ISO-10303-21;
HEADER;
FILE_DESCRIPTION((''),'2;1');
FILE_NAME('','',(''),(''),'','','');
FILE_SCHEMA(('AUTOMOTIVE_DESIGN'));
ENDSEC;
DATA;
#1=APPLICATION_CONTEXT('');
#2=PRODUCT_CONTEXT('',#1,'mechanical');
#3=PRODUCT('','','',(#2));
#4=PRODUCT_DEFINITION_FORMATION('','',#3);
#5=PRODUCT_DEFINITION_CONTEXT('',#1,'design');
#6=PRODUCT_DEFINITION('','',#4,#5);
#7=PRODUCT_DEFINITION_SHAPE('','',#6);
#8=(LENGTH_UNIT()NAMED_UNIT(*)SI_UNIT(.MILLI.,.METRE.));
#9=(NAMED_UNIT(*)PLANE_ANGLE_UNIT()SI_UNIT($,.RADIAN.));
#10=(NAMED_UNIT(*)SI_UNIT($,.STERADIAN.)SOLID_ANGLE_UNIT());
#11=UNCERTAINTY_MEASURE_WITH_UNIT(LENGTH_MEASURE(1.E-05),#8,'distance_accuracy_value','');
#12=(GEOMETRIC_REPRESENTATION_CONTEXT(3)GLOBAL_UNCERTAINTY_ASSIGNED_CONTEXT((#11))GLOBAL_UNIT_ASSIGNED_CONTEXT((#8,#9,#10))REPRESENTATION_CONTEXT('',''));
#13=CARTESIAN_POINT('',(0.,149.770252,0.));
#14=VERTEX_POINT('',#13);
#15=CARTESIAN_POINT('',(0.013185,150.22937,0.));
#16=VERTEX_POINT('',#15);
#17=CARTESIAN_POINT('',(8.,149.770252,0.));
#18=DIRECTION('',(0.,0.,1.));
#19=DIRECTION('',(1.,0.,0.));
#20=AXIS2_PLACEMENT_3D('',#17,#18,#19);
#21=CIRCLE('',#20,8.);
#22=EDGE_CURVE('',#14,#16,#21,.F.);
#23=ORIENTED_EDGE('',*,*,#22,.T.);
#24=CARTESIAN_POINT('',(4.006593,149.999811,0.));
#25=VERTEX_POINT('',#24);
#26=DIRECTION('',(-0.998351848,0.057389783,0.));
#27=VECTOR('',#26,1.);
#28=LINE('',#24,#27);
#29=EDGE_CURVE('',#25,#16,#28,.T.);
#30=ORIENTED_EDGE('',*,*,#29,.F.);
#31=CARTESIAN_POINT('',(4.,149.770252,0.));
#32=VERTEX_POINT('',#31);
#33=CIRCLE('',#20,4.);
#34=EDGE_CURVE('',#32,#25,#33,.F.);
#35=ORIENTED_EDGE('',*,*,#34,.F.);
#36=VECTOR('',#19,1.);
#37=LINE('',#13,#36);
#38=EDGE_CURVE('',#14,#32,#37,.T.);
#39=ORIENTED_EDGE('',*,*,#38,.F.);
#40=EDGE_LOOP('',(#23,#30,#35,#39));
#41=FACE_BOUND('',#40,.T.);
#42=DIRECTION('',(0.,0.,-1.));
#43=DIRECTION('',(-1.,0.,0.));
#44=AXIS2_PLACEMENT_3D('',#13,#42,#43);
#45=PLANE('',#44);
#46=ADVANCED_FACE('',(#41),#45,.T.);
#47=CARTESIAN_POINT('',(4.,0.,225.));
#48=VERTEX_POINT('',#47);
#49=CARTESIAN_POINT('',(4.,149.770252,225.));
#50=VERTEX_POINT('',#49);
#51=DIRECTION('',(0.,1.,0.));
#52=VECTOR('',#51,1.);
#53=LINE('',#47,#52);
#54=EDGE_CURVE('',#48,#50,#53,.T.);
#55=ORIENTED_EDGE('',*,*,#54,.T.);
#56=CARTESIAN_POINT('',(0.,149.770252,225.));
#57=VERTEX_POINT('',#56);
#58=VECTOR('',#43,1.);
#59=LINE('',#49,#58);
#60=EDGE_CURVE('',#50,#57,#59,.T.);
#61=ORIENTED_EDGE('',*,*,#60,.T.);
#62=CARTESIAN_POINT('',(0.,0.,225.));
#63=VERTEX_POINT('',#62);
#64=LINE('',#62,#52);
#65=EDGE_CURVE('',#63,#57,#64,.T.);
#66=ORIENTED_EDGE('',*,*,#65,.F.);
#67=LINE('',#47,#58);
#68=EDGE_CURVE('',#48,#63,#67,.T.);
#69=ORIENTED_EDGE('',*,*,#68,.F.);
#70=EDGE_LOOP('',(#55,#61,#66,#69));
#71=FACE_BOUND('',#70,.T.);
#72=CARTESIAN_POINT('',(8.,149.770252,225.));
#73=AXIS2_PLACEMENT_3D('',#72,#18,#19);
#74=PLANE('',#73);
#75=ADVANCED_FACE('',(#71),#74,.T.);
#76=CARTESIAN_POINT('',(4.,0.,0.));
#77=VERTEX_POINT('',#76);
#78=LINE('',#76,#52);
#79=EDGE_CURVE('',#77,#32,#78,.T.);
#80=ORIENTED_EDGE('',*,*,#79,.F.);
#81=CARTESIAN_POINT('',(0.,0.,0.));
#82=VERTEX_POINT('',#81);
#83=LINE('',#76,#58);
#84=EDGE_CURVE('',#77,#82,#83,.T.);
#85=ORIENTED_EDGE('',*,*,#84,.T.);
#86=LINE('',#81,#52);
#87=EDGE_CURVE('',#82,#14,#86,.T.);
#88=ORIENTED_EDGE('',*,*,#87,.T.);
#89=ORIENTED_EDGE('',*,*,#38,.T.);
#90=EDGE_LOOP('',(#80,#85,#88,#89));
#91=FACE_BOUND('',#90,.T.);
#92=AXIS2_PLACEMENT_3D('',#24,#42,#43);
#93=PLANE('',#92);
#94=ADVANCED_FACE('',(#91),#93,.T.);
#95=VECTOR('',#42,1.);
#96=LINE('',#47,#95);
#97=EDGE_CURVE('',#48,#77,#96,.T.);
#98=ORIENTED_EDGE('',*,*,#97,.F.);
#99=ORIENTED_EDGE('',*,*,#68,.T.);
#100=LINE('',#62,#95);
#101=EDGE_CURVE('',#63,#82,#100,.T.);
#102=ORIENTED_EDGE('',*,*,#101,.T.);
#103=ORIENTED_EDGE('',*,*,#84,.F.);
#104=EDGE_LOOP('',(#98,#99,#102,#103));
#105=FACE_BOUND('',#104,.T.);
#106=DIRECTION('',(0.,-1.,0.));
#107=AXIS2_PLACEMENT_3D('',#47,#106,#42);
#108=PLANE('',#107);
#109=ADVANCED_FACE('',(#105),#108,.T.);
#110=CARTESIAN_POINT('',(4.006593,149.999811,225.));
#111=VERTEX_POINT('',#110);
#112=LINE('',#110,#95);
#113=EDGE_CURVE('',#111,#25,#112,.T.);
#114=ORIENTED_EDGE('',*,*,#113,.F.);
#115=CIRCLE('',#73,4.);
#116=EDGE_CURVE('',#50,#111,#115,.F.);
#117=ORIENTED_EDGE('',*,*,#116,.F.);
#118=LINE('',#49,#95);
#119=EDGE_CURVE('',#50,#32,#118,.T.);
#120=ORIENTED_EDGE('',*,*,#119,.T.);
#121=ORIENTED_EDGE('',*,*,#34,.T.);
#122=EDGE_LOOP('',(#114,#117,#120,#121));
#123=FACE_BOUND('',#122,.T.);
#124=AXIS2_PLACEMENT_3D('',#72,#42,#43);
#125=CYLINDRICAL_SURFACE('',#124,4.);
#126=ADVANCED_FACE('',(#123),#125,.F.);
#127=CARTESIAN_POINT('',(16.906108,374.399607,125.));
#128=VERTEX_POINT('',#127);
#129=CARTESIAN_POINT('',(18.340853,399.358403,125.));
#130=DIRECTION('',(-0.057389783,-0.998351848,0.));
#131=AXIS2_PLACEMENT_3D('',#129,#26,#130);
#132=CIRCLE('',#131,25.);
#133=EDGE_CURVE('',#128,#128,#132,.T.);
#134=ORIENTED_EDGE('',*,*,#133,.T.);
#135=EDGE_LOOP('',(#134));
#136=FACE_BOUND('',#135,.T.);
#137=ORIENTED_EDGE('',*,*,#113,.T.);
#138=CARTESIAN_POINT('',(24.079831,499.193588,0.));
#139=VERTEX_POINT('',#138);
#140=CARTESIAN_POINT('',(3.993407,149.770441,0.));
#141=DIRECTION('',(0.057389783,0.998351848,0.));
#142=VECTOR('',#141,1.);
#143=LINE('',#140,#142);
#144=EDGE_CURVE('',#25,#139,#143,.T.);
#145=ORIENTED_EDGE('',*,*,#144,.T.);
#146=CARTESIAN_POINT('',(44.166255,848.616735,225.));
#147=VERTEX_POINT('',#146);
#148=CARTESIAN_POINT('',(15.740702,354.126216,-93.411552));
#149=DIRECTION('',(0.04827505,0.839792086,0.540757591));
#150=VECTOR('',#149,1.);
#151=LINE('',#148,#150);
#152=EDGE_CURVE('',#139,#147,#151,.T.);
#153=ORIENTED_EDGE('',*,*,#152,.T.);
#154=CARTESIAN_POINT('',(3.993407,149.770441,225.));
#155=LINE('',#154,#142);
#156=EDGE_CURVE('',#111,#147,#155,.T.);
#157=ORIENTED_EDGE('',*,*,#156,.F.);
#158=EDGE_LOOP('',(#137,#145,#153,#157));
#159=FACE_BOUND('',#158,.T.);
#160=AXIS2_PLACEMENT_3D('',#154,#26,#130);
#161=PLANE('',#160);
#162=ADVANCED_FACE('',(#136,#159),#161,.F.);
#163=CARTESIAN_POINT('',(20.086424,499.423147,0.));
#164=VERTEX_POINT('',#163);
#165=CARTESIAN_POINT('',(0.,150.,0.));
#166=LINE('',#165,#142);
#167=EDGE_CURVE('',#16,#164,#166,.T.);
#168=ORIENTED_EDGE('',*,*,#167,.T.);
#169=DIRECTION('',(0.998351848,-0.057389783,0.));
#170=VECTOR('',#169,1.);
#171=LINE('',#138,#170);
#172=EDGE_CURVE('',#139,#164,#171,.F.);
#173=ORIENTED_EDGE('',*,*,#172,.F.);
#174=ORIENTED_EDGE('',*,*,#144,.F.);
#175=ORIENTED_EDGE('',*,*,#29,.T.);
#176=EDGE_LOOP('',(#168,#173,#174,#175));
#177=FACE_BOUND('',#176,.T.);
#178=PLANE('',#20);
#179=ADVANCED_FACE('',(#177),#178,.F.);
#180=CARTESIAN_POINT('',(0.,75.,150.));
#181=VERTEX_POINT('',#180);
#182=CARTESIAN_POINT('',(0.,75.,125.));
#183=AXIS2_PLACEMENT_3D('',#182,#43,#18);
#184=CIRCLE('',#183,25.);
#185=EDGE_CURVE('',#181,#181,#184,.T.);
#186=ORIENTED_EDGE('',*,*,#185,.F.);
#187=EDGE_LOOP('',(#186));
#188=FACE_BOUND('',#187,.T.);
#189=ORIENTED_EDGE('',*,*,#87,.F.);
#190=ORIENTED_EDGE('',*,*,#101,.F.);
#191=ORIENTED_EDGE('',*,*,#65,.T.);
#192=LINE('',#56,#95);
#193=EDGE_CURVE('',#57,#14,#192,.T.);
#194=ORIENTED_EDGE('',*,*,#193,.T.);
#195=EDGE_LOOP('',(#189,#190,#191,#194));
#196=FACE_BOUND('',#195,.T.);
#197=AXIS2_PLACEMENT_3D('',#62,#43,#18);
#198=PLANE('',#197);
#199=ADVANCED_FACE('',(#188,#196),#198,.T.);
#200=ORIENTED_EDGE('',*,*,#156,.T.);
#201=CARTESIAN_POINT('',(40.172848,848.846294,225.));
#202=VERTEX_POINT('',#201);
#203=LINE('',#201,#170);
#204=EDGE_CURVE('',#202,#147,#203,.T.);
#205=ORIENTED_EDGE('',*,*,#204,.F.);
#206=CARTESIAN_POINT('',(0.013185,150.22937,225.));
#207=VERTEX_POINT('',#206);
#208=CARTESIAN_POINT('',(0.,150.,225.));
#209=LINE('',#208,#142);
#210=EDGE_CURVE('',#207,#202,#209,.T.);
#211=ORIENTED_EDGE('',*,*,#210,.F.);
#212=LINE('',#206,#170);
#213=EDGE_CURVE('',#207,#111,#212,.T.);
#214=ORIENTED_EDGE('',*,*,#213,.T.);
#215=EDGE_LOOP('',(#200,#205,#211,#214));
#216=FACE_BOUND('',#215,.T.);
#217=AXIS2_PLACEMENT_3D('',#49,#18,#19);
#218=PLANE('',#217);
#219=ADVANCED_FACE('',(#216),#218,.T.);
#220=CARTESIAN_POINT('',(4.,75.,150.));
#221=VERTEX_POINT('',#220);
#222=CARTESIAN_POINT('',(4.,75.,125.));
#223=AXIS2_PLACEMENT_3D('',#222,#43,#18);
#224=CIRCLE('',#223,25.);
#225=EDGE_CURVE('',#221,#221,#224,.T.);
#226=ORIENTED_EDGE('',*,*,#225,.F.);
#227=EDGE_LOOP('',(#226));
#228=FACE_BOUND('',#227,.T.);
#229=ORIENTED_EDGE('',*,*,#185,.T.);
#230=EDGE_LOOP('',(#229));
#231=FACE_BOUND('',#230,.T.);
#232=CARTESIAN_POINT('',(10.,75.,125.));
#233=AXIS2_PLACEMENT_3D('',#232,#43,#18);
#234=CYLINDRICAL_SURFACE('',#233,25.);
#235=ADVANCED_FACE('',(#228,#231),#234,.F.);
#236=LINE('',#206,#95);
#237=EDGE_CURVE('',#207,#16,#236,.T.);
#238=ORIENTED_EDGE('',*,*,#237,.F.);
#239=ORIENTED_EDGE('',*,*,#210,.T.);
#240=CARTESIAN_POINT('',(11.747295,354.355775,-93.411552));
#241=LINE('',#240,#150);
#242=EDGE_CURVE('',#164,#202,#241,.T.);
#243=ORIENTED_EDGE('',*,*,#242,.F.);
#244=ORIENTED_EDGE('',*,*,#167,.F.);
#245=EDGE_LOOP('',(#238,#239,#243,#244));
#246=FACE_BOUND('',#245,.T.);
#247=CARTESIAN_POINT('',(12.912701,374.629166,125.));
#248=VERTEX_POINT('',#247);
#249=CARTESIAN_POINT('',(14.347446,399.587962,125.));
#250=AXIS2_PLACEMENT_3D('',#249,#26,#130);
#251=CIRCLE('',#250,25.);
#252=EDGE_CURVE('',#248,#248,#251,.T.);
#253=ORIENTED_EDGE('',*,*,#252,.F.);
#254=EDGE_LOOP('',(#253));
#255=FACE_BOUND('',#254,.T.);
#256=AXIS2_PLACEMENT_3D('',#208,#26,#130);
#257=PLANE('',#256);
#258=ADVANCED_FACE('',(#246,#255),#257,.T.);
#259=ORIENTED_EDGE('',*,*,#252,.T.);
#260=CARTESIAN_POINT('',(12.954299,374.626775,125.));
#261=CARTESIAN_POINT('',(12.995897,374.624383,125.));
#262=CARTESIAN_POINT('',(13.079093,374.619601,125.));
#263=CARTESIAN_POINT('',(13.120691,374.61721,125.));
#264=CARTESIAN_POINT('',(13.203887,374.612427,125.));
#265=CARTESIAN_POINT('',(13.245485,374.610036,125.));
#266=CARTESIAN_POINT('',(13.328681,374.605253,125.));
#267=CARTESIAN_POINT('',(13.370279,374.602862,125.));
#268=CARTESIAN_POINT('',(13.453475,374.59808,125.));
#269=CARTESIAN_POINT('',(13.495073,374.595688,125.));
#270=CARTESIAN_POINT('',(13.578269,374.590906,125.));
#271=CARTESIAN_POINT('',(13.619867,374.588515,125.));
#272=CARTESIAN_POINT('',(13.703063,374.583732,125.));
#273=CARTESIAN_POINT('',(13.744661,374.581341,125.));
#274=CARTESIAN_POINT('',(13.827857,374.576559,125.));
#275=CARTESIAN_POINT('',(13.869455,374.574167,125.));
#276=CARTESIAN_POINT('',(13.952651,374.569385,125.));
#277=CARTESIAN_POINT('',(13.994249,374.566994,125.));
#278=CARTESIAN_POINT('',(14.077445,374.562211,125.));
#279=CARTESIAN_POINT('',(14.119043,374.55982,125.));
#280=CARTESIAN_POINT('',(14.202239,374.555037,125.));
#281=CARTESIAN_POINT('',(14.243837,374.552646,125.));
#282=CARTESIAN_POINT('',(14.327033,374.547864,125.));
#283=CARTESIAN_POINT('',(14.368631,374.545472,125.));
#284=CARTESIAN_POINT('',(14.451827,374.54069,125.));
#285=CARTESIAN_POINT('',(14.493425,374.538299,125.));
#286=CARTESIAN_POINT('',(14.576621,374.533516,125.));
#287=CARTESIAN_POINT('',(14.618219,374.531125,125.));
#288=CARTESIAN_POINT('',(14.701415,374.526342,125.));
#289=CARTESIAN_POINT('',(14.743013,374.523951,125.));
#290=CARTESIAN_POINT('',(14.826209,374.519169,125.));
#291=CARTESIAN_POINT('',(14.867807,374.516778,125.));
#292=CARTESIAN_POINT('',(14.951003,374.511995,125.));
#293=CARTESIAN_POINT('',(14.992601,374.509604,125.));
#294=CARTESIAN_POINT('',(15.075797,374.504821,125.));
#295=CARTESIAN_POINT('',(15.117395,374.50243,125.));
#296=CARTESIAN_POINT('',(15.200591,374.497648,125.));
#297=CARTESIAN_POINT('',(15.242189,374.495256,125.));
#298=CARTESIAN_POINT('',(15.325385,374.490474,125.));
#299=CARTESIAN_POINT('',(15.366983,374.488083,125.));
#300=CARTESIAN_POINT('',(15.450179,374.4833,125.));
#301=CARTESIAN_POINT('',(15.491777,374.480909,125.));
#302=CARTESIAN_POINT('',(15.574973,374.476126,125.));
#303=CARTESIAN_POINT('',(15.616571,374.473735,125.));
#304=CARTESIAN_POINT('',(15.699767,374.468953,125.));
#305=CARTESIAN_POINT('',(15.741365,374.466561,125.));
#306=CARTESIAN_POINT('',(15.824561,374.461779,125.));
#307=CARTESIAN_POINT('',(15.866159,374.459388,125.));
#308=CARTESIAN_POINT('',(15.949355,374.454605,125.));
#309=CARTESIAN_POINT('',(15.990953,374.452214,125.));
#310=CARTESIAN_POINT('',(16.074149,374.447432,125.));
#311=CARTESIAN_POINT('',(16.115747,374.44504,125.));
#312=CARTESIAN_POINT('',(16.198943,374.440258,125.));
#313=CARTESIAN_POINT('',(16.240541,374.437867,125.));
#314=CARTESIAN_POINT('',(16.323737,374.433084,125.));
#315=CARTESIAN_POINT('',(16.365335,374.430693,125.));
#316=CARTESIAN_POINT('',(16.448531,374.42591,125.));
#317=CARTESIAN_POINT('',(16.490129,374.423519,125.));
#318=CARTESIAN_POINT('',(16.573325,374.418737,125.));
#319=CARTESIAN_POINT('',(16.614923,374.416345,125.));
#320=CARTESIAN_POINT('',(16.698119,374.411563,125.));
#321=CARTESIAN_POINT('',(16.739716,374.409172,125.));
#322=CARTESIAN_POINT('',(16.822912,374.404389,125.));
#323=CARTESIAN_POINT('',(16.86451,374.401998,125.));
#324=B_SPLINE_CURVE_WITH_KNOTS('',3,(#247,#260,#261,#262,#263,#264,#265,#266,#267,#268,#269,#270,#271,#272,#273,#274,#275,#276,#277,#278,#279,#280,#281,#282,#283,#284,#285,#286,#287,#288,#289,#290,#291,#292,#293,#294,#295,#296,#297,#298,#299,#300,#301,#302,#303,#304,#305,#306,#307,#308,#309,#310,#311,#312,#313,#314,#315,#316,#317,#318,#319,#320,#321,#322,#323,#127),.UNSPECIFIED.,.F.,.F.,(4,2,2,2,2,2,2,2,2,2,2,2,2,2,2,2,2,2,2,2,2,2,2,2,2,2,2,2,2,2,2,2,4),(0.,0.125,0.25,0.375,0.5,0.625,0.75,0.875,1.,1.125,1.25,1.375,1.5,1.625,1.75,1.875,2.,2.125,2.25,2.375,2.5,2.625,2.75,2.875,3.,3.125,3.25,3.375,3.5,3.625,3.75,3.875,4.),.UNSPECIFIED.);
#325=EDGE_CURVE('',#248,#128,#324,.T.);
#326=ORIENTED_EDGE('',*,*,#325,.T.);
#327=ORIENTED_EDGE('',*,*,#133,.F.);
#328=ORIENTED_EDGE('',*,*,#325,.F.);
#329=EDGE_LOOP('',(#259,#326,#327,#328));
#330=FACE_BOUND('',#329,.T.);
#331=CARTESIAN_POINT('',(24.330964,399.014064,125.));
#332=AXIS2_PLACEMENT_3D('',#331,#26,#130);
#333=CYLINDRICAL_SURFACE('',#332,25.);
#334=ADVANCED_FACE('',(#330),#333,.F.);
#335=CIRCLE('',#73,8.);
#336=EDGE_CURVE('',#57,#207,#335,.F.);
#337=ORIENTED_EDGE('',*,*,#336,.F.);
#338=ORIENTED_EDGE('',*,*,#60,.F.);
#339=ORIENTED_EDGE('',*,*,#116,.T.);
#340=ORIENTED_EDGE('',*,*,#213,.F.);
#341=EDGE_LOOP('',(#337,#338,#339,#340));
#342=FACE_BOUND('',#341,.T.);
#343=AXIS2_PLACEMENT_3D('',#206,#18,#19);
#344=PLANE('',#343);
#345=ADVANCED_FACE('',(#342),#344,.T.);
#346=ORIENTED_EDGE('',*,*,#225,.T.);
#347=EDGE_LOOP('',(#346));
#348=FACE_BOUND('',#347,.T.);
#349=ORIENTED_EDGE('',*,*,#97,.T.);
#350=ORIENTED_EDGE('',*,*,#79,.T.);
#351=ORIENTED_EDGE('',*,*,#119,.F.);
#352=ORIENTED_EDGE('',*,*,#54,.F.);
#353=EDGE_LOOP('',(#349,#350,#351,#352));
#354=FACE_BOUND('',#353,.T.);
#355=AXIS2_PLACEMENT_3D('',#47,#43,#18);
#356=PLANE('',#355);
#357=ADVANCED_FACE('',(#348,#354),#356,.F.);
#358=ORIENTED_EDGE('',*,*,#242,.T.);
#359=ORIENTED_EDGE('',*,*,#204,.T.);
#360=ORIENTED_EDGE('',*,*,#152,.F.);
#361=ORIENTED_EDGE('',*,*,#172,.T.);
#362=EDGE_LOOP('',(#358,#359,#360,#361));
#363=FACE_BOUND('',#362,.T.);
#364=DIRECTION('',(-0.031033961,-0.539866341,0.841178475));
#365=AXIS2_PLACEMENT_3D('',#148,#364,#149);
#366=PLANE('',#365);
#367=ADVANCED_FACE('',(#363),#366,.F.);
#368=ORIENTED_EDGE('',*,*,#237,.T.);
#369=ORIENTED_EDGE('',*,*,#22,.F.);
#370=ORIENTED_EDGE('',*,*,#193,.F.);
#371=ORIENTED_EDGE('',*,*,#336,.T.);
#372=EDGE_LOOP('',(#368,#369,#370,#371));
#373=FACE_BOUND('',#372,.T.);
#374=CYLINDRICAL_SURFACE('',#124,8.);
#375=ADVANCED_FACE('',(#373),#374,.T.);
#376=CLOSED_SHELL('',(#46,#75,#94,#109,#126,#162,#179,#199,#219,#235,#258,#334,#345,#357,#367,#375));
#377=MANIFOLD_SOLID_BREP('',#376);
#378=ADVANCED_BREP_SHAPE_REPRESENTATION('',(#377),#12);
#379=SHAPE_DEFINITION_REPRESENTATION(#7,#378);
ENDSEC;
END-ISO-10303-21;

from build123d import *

# Parameters (mm, degrees)
SM_BASE_FLANGE_1_DEPTH = 225
CUT_EXTRUDE_1_DEPTH    = 10
SKETCH_7_R             = 25
CUT_EXTRUDE_2_DEPTH    = 10
SKETCH_8_R             = 25
CUT_EXTRUDE_3_DEPTH    = 10


# Sheet-metal steps are written as plain solids
with BuildPart() as part:
    # Sketch 1 → 基体-法兰1 (new body)
    with BuildSketch(Plane.XY):
        with BuildLine():
            Line((0, 0), (0, 149.77025154))
            ThreePointArc((0, 149.77025154), (0.003296983, 149.999905315), (0.013185214, 150.2293698))
            Line((0.013185214, 150.2293698), (40.172847796, 848.846293758))
            Line((40.172847796, 848.846293758), (44.166255189, 848.616734628))
            Line((44.166255189, 848.616734628), (4.006592607, 149.99981067))
            ThreePointArc((4.006592607, 149.99981067), (4.001648491, 149.885078427), (4, 149.77025154))
            Line((4, 149.77025154), (4, 0))
            Line((4, 0), (0, 0))
        make_face()
    extrude(amount=SM_BASE_FLANGE_1_DEPTH)

    # 草图6 → 切除-拉伸1 (cut)
    with BuildSketch(Plane(origin=(-8.594279324, 0.494038071, 0), x_dir=(0, 0, 1), z_dir=(-0.9983518482263736, 0.0573897825660991, 0))):
        Polygon((0, 849.752777234), (225, 849.752777234), (0, 499.752777234), align=None)
    extrude(amount=-CUT_EXTRUDE_1_DEPTH, mode=Mode.SUBTRACT)

    # 草图7 → 切除-拉伸2 (cut)
    with BuildSketch(Plane.ZY):
        with Locations((125, 75)):
            Circle(SKETCH_7_R)
    extrude(amount=-CUT_EXTRUDE_2_DEPTH, mode=Mode.SUBTRACT)

    # 草图8 → 切除-拉伸3 (cut)
    with BuildSketch(Plane(origin=(-8.594279324, 0.494038071, 0), x_dir=(0, 0, 1), z_dir=(-0.9983518482263735, 0.05738978256609909, 0))):
        with Locations(Location((125, 399.752777234, 0), (0, 0, 270))):
            Circle(SKETCH_8_R)
    extrude(amount=-CUT_EXTRUDE_3_DEPTH, mode=Mode.SUBTRACT)


solid = part.part
